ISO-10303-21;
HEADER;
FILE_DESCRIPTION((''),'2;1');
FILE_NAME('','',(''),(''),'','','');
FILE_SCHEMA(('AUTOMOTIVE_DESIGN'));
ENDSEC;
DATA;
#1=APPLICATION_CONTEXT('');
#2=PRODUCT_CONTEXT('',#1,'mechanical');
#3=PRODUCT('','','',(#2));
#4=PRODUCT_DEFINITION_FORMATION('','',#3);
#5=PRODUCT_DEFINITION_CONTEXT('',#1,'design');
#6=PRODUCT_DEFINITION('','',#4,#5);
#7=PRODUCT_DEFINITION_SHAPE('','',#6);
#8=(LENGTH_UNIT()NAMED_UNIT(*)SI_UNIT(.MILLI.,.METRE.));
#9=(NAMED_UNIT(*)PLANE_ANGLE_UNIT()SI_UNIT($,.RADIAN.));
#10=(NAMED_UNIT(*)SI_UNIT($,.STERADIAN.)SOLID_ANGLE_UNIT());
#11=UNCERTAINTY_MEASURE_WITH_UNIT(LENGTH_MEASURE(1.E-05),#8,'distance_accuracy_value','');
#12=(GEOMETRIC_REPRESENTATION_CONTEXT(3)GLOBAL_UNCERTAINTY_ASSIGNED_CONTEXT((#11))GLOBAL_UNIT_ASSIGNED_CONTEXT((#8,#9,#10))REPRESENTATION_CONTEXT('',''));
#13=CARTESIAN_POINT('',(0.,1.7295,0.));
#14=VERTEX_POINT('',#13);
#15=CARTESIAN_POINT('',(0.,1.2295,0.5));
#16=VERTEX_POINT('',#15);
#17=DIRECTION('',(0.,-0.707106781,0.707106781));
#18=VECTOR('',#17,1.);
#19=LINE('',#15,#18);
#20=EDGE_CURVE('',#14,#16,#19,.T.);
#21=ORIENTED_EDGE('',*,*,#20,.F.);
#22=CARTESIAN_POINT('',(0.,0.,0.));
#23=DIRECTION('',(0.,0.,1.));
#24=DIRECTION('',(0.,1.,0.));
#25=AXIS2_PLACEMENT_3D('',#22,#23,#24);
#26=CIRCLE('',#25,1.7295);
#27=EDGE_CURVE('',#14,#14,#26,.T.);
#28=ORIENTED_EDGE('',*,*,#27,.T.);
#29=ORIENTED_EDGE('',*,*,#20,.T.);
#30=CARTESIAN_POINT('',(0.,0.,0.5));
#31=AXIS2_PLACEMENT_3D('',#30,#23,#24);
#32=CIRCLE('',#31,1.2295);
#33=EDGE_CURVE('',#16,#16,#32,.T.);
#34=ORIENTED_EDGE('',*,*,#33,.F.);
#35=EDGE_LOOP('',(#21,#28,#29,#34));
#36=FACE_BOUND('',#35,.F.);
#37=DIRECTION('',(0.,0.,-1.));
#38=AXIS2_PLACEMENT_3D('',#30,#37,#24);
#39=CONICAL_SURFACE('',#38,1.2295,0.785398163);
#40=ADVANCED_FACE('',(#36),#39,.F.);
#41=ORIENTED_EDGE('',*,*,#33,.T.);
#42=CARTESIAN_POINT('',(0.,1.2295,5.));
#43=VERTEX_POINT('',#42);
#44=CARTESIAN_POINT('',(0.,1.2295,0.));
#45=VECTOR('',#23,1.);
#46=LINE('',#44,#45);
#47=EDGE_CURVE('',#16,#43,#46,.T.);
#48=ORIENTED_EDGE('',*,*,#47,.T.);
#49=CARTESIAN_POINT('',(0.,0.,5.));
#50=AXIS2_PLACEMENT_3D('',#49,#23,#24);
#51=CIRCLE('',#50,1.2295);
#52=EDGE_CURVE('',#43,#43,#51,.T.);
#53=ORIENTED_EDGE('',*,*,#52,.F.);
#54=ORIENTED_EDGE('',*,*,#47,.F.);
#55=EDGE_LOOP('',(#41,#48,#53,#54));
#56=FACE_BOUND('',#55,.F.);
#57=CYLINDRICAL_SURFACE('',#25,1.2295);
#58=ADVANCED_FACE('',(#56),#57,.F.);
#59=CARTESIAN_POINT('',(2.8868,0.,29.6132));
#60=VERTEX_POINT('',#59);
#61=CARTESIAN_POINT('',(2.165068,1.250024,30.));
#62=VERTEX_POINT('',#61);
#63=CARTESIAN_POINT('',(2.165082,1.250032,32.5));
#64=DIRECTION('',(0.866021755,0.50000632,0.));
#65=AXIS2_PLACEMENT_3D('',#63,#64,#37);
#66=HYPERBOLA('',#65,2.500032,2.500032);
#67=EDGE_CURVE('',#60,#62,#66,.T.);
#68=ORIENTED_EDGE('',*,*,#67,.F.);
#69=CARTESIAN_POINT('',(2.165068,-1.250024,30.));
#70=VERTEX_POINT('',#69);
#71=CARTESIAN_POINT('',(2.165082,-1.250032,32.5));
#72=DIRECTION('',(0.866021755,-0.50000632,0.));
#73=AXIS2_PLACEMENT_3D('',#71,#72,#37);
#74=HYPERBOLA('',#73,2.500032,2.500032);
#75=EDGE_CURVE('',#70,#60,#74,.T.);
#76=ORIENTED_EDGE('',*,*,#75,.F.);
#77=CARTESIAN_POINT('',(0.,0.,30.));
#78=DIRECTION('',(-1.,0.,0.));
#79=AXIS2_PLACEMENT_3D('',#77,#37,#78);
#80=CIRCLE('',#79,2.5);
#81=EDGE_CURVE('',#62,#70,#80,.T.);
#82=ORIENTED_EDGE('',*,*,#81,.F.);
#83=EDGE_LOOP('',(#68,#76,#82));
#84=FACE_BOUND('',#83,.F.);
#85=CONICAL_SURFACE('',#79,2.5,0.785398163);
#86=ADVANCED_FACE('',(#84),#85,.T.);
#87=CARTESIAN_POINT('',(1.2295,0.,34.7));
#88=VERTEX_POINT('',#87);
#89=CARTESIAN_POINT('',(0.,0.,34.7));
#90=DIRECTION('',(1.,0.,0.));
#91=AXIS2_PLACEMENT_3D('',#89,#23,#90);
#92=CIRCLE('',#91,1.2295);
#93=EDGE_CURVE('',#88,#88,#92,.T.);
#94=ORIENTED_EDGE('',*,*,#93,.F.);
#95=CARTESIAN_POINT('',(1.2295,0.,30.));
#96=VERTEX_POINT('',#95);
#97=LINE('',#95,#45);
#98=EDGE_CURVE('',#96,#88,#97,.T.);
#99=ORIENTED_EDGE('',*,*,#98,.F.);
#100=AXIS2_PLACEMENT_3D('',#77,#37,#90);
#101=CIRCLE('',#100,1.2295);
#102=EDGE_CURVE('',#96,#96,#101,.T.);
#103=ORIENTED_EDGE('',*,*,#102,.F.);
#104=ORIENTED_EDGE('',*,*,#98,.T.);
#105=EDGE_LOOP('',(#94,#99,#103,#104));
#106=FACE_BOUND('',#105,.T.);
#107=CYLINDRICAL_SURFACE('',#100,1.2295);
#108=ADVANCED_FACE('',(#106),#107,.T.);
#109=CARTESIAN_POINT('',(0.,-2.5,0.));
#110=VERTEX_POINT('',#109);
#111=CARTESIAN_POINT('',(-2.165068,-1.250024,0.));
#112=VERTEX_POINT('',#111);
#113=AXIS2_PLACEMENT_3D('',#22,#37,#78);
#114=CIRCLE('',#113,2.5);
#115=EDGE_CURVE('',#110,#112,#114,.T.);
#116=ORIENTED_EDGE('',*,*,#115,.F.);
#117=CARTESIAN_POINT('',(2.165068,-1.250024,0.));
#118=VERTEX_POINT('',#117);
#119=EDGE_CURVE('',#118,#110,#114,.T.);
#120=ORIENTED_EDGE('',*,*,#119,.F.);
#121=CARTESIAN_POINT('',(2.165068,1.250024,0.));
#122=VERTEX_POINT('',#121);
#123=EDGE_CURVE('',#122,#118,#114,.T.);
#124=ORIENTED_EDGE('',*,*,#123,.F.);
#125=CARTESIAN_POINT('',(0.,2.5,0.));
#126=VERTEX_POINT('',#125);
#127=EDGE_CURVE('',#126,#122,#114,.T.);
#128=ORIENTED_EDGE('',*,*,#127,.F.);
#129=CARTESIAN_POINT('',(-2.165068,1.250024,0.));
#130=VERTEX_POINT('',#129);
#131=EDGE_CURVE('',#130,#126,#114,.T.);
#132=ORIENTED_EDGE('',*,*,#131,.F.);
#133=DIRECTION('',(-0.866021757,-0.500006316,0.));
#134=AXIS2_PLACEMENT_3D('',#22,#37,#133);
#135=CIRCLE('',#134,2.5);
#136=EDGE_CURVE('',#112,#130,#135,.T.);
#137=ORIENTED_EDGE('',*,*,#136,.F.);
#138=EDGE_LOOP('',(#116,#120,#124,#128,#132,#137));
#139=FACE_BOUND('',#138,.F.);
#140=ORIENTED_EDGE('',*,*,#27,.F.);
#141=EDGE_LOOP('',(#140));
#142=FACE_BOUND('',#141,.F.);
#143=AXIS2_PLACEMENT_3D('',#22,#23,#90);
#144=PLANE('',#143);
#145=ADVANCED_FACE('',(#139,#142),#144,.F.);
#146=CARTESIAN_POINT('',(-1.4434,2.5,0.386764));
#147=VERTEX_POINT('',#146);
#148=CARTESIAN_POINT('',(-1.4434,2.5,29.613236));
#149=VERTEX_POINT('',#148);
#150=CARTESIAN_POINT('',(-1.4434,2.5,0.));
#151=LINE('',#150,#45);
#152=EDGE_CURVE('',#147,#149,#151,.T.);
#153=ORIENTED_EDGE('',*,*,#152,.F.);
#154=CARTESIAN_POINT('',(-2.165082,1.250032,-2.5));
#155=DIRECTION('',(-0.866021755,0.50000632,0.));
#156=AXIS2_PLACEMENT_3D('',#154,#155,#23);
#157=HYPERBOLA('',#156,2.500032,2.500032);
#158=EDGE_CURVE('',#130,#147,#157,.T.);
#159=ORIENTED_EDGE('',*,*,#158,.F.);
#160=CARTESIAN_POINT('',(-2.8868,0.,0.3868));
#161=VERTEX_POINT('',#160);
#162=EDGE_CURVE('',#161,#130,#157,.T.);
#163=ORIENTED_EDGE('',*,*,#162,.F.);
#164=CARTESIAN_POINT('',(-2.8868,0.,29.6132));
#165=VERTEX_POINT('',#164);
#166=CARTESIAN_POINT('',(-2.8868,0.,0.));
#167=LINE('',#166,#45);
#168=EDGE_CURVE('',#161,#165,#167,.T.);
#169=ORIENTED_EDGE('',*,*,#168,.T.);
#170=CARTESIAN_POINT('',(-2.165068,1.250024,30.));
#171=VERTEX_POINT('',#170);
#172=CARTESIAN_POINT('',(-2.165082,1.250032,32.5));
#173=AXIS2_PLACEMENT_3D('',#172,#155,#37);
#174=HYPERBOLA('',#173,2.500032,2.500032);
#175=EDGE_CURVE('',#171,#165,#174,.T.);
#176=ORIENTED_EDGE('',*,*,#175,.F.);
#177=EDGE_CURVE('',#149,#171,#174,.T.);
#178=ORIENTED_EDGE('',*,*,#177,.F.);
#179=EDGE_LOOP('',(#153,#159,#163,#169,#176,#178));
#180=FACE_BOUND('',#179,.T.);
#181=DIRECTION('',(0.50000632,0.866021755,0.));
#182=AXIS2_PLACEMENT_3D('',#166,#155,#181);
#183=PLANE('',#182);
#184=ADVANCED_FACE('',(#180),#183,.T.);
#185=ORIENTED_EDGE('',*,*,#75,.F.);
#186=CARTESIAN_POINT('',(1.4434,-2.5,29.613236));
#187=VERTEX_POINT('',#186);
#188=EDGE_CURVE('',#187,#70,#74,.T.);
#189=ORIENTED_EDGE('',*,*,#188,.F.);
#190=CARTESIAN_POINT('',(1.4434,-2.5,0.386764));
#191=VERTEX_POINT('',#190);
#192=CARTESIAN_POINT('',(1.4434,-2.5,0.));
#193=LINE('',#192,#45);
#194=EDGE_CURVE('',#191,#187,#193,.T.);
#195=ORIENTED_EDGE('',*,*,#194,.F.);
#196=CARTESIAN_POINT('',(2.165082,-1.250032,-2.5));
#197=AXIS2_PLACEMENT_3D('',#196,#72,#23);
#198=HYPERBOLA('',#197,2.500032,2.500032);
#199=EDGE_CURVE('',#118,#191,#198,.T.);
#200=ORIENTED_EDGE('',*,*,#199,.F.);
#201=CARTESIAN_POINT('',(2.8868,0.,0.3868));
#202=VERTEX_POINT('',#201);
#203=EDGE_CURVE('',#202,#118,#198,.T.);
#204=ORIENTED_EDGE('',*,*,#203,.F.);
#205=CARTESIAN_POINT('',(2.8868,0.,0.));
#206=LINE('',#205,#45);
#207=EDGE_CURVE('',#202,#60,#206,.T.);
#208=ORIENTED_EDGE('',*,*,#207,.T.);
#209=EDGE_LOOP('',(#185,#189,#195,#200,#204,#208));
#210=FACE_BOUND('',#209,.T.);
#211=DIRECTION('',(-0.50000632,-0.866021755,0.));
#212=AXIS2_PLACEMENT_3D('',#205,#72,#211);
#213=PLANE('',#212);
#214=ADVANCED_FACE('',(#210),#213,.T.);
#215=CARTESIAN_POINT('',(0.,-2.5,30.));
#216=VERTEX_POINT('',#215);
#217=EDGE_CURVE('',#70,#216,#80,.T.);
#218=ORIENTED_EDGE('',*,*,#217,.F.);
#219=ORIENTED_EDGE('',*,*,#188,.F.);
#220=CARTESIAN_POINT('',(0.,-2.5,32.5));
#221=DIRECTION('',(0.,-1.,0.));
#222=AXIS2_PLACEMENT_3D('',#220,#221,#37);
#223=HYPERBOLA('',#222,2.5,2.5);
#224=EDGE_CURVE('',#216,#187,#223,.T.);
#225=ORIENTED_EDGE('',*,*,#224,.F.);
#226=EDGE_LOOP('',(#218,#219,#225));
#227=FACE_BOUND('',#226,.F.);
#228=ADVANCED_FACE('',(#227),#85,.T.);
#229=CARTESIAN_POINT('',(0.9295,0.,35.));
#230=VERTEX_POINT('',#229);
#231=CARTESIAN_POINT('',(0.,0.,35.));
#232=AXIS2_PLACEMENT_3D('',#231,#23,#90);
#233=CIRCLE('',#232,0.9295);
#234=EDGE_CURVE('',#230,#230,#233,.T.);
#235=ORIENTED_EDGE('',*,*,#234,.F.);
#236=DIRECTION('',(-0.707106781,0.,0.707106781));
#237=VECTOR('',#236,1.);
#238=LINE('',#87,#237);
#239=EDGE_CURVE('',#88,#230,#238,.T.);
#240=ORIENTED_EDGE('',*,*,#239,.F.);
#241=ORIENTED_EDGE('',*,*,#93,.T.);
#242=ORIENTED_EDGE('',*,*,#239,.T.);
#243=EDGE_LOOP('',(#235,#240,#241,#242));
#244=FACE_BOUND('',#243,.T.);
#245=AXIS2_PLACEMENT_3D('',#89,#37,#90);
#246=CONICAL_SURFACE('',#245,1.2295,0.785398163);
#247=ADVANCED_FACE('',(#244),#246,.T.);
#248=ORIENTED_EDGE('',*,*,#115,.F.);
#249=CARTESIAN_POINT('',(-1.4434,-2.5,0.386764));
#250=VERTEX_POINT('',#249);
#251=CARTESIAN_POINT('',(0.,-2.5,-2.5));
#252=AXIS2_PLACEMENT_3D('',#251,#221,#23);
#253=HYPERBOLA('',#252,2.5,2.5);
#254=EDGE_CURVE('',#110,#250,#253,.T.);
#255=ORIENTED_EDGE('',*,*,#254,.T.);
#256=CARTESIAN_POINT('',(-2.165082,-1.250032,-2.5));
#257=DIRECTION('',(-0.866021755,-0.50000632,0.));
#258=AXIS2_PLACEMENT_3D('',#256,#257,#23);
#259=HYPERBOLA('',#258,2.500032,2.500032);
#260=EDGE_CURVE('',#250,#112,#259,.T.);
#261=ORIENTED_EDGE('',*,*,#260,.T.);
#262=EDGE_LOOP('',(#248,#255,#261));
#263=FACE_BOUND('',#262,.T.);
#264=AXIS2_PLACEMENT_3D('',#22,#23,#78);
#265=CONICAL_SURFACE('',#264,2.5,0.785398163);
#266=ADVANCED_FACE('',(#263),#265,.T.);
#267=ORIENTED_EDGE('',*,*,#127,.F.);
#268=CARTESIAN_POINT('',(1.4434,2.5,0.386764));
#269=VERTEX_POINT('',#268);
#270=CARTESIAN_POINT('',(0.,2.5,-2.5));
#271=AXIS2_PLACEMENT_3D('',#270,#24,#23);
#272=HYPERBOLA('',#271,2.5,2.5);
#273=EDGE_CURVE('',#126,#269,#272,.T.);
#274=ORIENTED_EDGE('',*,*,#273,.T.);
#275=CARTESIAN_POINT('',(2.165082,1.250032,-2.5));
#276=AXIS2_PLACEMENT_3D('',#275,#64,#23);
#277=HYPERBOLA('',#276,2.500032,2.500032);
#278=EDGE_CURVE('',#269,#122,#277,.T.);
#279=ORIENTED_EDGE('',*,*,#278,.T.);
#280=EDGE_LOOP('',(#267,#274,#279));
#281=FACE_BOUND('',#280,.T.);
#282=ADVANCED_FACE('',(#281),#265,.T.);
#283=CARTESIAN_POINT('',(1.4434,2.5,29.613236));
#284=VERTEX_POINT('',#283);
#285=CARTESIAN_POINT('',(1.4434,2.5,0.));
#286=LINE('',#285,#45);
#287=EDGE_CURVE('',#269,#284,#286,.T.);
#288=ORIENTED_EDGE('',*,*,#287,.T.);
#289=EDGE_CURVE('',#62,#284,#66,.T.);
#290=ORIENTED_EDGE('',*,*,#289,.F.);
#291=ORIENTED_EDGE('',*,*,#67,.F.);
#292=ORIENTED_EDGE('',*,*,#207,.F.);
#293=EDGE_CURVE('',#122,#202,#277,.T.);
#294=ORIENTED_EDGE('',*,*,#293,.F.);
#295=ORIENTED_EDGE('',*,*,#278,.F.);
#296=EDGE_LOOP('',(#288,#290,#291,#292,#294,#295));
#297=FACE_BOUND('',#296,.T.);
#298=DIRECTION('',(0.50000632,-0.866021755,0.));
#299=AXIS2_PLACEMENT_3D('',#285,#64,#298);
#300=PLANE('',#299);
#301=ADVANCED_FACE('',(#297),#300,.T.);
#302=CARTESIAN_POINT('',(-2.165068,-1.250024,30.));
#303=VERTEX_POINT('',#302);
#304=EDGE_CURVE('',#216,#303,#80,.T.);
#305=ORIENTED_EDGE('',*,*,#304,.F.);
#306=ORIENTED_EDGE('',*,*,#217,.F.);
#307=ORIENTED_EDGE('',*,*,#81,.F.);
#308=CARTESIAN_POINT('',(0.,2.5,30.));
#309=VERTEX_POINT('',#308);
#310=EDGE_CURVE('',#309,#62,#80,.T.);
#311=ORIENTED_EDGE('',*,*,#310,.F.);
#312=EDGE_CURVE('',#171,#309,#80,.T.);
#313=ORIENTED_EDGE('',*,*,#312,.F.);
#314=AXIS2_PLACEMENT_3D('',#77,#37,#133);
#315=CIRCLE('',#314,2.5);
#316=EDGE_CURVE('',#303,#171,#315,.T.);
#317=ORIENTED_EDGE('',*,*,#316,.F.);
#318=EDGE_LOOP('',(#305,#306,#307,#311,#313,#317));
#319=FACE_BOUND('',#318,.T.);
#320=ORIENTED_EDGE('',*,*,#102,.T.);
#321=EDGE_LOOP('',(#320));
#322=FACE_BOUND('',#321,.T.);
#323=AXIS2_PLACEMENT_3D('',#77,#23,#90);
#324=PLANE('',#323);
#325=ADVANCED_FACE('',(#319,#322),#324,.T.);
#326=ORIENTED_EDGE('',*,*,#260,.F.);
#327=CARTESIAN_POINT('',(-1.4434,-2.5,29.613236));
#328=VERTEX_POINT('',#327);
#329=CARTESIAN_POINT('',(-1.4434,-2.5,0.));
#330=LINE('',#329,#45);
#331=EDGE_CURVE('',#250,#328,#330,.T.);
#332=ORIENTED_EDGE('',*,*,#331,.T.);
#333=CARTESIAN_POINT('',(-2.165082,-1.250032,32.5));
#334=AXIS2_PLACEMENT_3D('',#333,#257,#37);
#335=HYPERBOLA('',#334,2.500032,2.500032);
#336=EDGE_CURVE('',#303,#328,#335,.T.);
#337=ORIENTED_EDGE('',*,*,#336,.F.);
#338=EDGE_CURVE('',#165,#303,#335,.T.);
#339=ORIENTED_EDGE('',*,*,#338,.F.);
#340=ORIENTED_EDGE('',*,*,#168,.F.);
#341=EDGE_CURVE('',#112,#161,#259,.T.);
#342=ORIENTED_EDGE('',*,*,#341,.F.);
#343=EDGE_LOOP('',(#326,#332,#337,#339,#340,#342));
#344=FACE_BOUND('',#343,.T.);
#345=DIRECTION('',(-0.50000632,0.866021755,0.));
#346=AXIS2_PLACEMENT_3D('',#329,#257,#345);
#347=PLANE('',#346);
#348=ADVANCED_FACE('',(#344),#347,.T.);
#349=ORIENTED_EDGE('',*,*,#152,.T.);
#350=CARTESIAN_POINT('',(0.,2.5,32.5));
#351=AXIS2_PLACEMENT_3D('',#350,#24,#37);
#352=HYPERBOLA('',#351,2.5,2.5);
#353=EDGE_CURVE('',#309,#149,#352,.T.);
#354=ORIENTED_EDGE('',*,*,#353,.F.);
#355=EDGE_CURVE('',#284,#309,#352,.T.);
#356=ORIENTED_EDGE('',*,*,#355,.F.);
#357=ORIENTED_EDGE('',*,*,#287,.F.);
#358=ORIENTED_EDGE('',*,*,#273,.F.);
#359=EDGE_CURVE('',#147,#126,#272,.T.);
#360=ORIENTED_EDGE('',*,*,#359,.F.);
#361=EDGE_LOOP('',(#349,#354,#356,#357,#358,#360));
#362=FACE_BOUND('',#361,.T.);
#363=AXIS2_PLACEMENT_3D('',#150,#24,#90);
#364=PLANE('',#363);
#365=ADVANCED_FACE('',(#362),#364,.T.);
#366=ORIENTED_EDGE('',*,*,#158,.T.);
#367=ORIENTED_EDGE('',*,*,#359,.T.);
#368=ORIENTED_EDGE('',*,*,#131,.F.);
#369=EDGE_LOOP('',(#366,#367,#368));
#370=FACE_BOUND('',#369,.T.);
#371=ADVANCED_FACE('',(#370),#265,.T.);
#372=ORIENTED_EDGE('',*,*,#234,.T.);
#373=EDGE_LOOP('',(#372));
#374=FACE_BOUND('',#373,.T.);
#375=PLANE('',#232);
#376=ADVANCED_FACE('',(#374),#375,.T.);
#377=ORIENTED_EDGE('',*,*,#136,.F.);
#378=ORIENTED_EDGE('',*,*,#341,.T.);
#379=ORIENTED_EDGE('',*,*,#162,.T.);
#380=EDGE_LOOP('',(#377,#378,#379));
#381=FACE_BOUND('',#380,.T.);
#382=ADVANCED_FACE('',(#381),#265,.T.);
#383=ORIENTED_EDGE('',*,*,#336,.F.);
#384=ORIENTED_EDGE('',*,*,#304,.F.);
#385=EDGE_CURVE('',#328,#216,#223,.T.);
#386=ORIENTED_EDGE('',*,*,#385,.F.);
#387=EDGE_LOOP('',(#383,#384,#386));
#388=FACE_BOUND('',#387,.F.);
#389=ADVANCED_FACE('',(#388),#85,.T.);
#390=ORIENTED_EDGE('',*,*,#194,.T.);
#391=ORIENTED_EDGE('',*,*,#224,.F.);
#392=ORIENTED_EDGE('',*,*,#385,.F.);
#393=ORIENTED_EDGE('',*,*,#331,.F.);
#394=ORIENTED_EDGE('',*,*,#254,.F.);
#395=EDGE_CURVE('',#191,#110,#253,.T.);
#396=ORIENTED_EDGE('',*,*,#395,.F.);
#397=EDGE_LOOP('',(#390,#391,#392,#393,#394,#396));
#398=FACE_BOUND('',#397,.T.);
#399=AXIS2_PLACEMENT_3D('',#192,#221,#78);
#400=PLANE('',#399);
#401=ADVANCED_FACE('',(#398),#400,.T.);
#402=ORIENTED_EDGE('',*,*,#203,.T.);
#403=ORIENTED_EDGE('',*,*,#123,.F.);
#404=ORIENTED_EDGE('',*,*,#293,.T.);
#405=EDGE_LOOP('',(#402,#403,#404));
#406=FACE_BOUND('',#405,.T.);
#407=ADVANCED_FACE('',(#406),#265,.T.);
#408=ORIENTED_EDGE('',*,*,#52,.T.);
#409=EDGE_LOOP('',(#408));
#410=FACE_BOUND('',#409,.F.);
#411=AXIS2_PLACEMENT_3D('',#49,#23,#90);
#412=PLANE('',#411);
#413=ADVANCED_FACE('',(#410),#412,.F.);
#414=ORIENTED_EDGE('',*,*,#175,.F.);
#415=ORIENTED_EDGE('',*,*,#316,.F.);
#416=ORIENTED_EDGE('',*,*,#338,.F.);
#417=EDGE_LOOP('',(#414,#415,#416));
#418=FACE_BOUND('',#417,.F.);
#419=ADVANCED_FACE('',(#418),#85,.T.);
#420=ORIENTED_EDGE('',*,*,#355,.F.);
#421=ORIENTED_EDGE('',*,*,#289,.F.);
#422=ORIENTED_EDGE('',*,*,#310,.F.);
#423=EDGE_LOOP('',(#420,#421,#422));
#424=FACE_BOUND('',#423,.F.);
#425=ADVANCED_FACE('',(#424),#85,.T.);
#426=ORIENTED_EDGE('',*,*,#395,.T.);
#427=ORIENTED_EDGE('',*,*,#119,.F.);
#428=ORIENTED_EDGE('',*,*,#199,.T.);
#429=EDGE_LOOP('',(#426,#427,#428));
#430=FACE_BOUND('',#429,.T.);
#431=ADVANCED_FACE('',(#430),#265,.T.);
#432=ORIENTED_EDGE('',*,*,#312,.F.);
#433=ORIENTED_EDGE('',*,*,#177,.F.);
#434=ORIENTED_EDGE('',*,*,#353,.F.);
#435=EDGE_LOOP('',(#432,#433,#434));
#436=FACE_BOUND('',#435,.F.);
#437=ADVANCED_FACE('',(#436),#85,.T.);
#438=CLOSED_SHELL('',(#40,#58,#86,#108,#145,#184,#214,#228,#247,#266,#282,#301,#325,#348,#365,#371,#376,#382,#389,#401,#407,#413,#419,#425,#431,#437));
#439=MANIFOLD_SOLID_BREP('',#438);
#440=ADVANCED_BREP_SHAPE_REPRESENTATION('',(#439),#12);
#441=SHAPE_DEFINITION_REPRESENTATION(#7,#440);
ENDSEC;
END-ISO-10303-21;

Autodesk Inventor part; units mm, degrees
ref_plane "YZ Plane" through (0, 0, 0) normal (1, 0, 0) x (0, 1, 0)
ref_plane "XZ Plane" through (0, 0, 0) normal (0, 1, 0) x (-1, 0, 0)
ref_plane "XY Plane" through (0, 0, 0) normal (0, 0, 1) x (1, 0, 0)
sketch "Sketch1" plane through (0, 0, 0) normal (0, 0, 1) x (1, 0, 0)
  line L0 (1.4434, 2.5) -> (2.8868, 0)
  line L1 (2.8868, 0) -> (1.4434, -2.5)
  line L2 (1.4434, -2.5) -> (-1.4434, -2.5)
  line L3 (-1.4434, -2.5) -> (-2.8868, 0)
  line L4 (-2.8868, 0) -> (-1.4434, 2.5)
  line L5 (-1.4434, 2.5) -> (1.4434, 2.5)
  point P0 (0, 0)
  point P1 (0, 0)
  dimension "d0" = 5
extrude "Extrusion1" add sketch "Sketch1" along normal blind 30
sketch "Sketch3" plane through (0, 0, 0) normal (0, 0, -1) x (-1, 0, 0)
  line L0 (1.4434, 2.5) -> (-1.4434, 2.5) projected
  circle A0 centre (0, 0) radius 2.5
hole "Hole1" at (0, 0, 0) direction (0, 0, 1) diameter 2.459 end through all thread size "M3x0.5" class "6H" standard "ISO Metric profile"
chamfer "Chamfer2" distance 0.5 angle 45 1 edges at (0, -1.2295, 0)
sketch "Sketch4" plane through (0, 0, 0) normal (0, 0, -1) x (-1, 0, 0)
  circle A0 centre (0, 0) radius 1.7295 projected
  circle A1 centre (0, 0) radius 2.5
  circle A2 centre (0, 0) radius 6
extrude "Extrusion3" cut sketch "Sketch4" against normal blind 1 draft -45 contours A2
ref_plane "Work Plane1" through (0, 0, 15) normal (0, 0, -1) x (-1, 0, 0)
mirror "Mirror2" about plane through (0, 0, 15) normal (0, 0, -1) of "Extrusion3"
sketch "Sketch5" plane through (0, 0, 30) normal (0, 0, 1) x (1, 0, 0)
  circle A0 centre (0, 0) radius 1.2295 projected
extrude "Extrusion4" add sketch "Sketch5" along normal blind 5 and the other way blind 25
thread "Thread2" size "M2.5x0.45" class "6g" standard "ANSI Metric M Profile" full length
chamfer "Chamfer4" distance 0.3 angle 45 1 edges at (-1.2295, 0, 35)
properties part number "support m3 10" material "Stainless Steel"
